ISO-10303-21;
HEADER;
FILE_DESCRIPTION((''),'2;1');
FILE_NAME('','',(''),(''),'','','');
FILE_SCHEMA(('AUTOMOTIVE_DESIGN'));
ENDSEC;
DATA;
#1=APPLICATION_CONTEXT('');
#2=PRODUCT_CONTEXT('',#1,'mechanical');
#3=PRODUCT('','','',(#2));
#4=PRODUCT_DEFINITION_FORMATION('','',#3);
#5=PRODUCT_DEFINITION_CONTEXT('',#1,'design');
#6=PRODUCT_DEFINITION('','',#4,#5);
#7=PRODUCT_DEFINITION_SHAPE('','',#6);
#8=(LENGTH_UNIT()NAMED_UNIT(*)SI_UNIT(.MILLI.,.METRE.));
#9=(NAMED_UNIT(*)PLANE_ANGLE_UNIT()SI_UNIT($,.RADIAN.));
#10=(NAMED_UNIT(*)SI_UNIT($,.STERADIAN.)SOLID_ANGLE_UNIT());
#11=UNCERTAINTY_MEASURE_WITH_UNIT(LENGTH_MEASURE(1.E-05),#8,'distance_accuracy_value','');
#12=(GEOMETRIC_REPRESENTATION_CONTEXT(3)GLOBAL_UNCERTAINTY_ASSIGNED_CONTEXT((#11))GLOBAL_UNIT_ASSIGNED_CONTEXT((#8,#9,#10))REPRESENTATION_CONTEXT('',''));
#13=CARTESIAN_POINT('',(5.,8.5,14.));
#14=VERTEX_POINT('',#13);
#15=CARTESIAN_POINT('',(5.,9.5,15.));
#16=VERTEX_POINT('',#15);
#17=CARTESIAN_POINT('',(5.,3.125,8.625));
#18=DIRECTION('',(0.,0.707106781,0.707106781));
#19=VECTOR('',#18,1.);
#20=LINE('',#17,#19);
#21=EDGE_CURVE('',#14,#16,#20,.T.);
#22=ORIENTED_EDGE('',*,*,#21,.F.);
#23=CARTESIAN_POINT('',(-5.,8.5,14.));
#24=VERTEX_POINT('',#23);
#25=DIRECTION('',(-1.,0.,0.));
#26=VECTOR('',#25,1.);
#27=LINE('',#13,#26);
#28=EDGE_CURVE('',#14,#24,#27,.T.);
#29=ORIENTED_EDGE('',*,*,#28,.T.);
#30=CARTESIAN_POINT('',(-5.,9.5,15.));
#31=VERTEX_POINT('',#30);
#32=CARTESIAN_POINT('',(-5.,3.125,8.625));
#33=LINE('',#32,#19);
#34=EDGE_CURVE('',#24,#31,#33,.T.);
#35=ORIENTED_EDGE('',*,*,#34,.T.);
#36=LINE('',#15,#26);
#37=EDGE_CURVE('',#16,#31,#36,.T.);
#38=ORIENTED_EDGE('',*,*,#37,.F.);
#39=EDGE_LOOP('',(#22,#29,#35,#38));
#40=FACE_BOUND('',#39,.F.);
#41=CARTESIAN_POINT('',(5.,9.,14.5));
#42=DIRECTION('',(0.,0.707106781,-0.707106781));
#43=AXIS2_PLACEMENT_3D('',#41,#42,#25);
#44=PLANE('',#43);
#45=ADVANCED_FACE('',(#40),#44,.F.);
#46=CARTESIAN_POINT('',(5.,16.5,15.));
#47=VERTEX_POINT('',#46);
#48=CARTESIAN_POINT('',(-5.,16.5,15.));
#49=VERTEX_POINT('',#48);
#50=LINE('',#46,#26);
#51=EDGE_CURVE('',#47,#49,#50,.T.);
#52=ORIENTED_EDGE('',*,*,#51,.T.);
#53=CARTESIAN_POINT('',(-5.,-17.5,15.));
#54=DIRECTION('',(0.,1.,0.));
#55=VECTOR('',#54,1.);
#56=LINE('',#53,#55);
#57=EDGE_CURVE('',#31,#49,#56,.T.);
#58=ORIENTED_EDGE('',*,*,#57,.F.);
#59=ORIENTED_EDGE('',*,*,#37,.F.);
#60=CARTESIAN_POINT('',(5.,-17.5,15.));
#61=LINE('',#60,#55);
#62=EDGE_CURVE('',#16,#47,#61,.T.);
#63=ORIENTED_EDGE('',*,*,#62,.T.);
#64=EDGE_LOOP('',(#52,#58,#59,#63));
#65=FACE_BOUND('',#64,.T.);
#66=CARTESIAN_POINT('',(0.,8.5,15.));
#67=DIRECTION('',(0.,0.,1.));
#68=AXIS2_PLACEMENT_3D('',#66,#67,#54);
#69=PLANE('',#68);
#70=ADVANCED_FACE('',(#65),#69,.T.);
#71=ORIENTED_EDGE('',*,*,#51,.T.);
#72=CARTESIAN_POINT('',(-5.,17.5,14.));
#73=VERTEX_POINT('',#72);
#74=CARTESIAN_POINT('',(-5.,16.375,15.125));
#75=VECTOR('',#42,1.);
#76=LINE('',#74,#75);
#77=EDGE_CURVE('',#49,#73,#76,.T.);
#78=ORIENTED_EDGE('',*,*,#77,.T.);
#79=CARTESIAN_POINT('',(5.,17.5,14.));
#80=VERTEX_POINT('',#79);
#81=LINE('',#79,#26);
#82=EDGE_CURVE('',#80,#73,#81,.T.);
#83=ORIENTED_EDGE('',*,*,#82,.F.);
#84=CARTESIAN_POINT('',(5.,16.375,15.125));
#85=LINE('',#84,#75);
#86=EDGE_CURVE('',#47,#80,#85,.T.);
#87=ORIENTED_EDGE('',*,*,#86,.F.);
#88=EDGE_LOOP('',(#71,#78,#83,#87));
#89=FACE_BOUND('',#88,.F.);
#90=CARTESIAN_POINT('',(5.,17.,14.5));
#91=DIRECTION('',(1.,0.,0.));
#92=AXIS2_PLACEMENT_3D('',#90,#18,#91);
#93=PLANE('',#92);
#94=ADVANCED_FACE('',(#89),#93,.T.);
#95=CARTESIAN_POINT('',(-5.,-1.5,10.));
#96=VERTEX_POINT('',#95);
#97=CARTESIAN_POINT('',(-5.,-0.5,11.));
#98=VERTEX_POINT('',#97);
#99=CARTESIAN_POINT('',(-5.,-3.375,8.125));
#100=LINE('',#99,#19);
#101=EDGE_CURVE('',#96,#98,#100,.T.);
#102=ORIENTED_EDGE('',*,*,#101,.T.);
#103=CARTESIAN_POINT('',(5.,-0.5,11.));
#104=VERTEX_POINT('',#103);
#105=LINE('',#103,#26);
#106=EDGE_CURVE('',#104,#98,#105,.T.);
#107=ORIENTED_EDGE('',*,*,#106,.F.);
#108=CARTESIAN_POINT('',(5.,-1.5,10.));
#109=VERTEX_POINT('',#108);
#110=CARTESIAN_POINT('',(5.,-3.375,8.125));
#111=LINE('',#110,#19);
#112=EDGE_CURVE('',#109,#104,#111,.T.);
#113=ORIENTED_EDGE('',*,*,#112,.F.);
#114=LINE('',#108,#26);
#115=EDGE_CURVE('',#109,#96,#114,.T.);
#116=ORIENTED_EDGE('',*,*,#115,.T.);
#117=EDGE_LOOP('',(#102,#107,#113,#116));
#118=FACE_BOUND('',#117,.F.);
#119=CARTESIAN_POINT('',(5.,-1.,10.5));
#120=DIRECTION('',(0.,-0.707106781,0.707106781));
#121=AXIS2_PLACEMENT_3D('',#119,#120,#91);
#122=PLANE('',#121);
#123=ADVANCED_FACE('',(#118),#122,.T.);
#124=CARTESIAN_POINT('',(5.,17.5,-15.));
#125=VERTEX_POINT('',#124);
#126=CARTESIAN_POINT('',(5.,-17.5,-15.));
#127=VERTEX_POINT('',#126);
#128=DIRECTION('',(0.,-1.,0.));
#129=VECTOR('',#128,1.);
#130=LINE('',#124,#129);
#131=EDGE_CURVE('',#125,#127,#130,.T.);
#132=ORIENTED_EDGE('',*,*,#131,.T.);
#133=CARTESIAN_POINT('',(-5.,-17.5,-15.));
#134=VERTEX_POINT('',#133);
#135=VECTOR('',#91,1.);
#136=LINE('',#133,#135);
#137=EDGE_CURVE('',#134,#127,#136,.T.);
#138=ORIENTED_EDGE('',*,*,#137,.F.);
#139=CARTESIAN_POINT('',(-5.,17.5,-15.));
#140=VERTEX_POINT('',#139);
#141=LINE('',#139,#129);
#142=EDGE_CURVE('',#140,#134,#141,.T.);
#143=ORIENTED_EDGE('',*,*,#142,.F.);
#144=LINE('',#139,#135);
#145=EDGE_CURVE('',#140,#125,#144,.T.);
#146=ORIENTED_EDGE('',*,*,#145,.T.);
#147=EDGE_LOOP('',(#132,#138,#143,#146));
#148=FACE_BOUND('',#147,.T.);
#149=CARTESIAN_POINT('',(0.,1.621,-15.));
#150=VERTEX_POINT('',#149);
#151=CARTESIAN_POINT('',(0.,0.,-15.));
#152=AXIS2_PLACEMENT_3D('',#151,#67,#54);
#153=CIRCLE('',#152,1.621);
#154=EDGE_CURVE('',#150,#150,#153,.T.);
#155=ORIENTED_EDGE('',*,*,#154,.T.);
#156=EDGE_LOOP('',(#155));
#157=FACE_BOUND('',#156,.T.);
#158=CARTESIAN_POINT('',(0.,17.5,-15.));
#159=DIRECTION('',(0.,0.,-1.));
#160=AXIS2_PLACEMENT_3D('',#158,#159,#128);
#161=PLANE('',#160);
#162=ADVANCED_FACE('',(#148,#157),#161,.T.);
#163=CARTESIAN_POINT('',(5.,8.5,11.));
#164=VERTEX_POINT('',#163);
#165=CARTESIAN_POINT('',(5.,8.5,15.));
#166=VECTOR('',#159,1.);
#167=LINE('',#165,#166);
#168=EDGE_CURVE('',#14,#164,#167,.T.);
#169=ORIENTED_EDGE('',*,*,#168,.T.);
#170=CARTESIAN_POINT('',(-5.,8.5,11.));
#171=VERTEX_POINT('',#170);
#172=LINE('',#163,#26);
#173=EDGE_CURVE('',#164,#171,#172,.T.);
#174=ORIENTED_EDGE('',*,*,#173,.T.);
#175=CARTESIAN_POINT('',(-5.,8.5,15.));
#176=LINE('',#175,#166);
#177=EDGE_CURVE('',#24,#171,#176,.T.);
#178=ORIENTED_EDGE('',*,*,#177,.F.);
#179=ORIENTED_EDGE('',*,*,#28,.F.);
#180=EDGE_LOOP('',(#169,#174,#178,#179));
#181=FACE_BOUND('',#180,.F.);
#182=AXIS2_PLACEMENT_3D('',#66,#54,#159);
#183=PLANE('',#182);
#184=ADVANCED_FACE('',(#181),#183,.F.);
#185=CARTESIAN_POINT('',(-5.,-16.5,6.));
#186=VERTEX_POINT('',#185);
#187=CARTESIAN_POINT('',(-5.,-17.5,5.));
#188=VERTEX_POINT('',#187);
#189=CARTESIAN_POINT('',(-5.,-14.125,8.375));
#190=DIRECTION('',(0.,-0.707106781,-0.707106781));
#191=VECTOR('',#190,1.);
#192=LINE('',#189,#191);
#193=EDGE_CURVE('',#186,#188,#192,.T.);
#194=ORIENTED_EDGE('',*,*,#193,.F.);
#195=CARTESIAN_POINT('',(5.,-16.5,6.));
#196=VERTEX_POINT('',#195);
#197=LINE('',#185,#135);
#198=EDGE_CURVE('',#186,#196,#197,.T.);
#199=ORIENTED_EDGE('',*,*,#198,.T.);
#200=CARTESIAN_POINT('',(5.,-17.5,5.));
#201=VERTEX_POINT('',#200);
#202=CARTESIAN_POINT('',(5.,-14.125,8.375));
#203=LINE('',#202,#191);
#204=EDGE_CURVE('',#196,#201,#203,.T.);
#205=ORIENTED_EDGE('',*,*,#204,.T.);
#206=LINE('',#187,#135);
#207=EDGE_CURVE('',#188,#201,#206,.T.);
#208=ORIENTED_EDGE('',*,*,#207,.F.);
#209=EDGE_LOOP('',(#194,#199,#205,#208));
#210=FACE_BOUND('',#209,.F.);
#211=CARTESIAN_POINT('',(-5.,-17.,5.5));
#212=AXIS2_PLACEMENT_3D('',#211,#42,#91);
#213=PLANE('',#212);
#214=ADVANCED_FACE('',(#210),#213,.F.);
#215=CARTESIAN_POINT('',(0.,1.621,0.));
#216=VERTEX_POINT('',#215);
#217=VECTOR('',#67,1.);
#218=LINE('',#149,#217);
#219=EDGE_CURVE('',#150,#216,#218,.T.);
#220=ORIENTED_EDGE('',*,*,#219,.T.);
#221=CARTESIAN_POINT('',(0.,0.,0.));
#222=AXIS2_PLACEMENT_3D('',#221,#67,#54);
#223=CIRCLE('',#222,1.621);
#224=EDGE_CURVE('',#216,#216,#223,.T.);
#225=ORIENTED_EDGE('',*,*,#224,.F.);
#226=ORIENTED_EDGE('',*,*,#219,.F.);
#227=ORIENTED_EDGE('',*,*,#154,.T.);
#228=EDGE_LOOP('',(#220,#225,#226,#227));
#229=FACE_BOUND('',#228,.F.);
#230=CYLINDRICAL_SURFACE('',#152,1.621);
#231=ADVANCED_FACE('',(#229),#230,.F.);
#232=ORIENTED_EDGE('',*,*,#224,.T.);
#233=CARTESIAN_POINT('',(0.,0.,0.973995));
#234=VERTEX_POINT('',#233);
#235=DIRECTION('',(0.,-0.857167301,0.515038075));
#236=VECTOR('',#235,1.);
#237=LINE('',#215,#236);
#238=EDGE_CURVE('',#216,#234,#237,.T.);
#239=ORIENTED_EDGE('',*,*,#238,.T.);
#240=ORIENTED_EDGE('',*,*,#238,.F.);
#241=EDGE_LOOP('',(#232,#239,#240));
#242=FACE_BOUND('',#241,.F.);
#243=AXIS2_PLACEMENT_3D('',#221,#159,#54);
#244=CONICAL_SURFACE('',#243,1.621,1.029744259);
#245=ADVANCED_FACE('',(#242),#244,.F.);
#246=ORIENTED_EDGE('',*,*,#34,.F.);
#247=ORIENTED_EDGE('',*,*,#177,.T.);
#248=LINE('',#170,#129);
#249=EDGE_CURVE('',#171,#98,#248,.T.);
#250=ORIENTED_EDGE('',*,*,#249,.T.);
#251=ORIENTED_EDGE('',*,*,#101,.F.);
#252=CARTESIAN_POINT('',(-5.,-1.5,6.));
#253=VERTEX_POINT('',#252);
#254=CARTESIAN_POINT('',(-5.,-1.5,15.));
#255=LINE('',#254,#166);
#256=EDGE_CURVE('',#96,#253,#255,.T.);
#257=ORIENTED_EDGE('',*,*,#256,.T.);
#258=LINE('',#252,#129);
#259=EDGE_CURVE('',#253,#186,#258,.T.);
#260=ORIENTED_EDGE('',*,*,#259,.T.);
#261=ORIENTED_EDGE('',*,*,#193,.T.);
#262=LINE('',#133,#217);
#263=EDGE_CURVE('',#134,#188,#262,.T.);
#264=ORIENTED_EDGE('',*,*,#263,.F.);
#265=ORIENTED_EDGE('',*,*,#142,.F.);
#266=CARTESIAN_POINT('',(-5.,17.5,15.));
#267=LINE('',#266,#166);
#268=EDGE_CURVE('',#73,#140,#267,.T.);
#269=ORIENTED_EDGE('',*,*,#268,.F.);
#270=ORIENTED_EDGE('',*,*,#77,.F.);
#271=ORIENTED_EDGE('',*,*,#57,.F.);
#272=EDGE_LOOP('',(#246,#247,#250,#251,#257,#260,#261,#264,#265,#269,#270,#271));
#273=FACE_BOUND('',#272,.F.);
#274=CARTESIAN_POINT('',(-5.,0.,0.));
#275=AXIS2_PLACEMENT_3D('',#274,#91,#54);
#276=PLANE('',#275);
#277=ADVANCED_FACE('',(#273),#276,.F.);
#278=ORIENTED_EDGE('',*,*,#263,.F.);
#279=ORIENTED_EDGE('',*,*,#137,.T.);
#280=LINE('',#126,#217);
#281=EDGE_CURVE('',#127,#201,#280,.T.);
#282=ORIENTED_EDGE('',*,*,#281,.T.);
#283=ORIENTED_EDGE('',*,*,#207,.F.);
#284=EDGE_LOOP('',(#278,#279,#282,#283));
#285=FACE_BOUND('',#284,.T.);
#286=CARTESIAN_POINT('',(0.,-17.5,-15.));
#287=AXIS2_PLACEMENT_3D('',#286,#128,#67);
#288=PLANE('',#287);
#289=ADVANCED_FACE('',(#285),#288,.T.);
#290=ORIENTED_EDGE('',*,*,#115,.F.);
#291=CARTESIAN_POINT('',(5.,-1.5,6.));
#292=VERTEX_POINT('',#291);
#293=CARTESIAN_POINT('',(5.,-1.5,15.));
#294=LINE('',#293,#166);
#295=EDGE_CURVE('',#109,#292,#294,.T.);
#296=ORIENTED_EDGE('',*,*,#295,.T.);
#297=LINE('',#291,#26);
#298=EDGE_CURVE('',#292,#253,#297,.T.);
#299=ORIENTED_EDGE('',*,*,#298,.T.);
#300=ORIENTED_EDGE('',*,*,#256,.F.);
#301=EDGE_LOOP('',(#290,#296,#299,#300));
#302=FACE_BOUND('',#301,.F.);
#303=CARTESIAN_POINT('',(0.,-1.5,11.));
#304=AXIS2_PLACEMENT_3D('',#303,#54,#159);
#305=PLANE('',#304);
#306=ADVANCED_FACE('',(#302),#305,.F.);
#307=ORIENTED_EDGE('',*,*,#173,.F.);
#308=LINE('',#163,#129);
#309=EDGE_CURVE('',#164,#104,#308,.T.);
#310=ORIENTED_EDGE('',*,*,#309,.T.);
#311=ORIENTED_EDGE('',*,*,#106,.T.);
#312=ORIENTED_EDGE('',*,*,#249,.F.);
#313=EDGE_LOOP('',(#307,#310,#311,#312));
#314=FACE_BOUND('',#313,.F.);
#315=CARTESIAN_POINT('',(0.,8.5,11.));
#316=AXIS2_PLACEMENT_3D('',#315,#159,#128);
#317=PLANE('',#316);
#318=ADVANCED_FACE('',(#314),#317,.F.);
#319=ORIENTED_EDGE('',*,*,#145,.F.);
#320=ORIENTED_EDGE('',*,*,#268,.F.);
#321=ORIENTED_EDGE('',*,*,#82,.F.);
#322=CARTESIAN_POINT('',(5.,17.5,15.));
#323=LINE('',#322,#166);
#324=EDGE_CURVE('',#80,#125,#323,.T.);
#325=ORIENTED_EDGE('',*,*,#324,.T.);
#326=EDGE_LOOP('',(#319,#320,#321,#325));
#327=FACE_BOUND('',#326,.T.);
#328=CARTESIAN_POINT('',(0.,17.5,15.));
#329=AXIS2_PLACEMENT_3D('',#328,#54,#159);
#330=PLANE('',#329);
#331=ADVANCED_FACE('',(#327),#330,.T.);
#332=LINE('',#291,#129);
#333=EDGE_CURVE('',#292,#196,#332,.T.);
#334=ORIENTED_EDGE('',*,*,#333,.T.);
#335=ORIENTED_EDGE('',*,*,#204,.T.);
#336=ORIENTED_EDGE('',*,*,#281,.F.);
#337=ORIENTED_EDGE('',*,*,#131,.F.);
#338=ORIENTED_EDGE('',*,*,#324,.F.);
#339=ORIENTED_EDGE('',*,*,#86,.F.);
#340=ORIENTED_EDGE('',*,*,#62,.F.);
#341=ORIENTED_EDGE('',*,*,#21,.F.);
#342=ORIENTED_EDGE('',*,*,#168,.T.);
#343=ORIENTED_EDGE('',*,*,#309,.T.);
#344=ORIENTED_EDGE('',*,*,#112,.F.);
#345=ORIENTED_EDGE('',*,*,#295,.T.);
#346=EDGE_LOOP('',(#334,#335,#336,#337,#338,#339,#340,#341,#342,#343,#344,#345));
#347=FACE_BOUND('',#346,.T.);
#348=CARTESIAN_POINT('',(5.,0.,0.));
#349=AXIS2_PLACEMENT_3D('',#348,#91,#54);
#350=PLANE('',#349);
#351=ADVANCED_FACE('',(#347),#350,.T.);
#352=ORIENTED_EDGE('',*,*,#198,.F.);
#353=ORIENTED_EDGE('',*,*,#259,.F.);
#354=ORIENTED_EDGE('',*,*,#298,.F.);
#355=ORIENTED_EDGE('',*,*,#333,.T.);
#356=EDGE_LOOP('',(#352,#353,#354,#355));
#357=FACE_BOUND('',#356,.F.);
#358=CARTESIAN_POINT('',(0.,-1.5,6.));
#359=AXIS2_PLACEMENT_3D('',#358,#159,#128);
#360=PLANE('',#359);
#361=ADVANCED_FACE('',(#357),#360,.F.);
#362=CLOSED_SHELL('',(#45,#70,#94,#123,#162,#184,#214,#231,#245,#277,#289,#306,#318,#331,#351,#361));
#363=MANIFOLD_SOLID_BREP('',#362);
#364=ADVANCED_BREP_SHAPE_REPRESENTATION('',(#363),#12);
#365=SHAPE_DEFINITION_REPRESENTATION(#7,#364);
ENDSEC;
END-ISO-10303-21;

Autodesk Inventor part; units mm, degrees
ref_plane "YZ Plane" through (0, 0, 0) normal (1, 0, 0) x (0, 1, 0)
ref_plane "XZ Plane" through (0, 0, 0) normal (0, 1, 0) x (-1, 0, 0)
ref_plane "XY Plane" through (0, 0, 0) normal (0, 0, 1) x (1, 0, 0)
sketch "Esboço1" plane through (0, 0, 0) normal (1, 0, 0) x (0, 1, 0)
  line L0 (-24.5, 0) -> (24.5, 0) construction
  line L1 (0, -21) -> (0, 21) construction
  line L2 (-17.5, 15) -> (17.5, 15)
  line L3 (17.5, 15) -> (17.5, -15)
  line L4 (17.5, -15) -> (-17.5, -15)
  line L5 (-17.5, -15) -> (-17.5, 15)
  line L6 (-17.5, 15) -> (-1.5, 15)
  line L7 (-1.5, 15) -> (-1.5, 6)
  line L8 (-1.5, 6) -> (-17.5, 6)
  line L9 (-17.5, 6) -> (-17.5, 15)
  line L10 (-1.5, 15) -> (8.5, 15)
  line L11 (8.5, 15) -> (8.5, 11)
  line L12 (8.5, 11) -> (-1.5, 11)
  line L13 (-1.5, 11) -> (-1.5, 15)
  point P0 (0, 0)
  point P1 (8.5, 15)
  point P2 (-1.5, 11)
  point P3 (-17.5, 6)
  dimension "d0" = 35
  dimension "d1" = 30
  dimension "d3" = 16
  dimension "d5" = 10
  dimension "d16" = 4
  dimension "d17" = 9
extrude "Extrusão1" add sketch "Esboço1" along normal mid plane 10 contours L8 L7 L12 L11 L2 L3 L4 L5
sketch "Esboço2" plane through (5, 17.5, -15) normal (0, 0, -1) x (-1, 0, 0)
  point P0 (5, -17.5)
hole "Furo1" at (0, 0, -15) direction (0, 0, 1) diameter 3.242 depth 15 tip angle 118 thread size "M4x0.7" class "6H" standard "ISO Metric profile"
chamfer "Chanfro1" distance 1 angle 45 4 edges at (0, -1.5, 11) (0, 8.5, 15) (0, 17.5, 15) (0, -17.5, 6)
properties part number "GRJ-05-102" material "Fenolite OR"
